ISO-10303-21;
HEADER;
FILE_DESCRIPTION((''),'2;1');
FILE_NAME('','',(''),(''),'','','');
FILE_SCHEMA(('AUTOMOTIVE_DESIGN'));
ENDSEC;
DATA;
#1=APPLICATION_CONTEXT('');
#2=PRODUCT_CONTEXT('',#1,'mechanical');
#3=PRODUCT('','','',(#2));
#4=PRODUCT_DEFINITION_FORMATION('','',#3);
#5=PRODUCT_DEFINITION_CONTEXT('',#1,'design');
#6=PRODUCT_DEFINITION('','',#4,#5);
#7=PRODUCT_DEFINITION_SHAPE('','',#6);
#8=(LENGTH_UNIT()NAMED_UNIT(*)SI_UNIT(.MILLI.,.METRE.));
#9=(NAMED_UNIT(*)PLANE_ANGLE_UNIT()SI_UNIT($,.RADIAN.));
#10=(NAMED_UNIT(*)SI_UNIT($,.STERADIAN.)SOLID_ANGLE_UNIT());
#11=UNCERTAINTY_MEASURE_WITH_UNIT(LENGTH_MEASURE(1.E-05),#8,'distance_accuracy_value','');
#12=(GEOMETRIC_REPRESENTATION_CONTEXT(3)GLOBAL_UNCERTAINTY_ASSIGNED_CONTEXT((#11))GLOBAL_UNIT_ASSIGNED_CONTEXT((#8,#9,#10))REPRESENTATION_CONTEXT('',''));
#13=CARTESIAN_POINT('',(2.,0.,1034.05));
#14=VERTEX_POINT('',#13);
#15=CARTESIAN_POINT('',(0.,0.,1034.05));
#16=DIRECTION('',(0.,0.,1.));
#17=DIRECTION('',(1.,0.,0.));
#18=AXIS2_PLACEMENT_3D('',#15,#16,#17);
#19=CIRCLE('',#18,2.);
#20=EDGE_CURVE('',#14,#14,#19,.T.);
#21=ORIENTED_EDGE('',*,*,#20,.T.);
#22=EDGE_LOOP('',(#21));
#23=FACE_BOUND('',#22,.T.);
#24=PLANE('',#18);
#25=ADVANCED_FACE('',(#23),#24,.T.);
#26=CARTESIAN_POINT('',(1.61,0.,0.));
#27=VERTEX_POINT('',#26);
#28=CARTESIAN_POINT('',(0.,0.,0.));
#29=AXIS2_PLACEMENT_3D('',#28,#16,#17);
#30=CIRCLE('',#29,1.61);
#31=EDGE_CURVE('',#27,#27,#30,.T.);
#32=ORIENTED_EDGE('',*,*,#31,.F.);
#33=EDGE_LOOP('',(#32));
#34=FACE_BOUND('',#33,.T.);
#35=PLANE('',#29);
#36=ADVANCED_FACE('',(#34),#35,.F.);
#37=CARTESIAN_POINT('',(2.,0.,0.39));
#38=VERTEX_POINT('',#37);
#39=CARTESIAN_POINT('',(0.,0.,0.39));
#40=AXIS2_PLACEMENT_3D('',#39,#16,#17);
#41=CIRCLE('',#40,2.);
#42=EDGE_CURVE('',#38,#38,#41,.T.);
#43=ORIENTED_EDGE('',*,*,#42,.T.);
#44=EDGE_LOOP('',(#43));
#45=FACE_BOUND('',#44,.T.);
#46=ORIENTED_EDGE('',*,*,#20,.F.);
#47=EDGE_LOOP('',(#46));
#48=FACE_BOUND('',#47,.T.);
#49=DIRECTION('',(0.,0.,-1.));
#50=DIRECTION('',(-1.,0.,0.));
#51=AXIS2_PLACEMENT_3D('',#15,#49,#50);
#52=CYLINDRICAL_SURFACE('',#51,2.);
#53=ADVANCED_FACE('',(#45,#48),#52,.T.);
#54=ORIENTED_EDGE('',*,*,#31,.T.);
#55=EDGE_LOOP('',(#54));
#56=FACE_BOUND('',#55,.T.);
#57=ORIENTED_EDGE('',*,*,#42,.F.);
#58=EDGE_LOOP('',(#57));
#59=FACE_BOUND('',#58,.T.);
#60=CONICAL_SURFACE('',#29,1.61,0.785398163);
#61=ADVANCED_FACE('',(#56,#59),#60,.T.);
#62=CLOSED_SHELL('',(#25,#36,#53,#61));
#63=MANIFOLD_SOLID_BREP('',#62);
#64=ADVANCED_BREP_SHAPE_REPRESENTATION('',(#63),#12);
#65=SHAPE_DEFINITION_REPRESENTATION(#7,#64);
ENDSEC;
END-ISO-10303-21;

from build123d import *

# Parameters (mm, degrees)
SKETCH1_R           = 2
BOSS_EXTRUDE1_DEPTH = 1034.05


# Read off the part's stored shape, not the designer's step: M4 Machine Threads Stud1
with BuildPart() as part:
    # Sketch1 → Boss-Extrude1 (new body)
    with BuildSketch(Plane.XY):
        Circle(SKETCH1_R)
    extrude(amount=BOSS_EXTRUDE1_DEPTH)

    # M4 Machine Threads Stud1 outline → M4 Machine Threads Stud1 (revolve, cut)
    with BuildSketch(Plane.XZ):
        Polygon((2, 0.39), (1.61, 0), (2, 0), align=None)
    revolve(axis=Axis((0, 0, 0), (0, 0, 1)), mode=Mode.SUBTRACT)


solid = part.part
